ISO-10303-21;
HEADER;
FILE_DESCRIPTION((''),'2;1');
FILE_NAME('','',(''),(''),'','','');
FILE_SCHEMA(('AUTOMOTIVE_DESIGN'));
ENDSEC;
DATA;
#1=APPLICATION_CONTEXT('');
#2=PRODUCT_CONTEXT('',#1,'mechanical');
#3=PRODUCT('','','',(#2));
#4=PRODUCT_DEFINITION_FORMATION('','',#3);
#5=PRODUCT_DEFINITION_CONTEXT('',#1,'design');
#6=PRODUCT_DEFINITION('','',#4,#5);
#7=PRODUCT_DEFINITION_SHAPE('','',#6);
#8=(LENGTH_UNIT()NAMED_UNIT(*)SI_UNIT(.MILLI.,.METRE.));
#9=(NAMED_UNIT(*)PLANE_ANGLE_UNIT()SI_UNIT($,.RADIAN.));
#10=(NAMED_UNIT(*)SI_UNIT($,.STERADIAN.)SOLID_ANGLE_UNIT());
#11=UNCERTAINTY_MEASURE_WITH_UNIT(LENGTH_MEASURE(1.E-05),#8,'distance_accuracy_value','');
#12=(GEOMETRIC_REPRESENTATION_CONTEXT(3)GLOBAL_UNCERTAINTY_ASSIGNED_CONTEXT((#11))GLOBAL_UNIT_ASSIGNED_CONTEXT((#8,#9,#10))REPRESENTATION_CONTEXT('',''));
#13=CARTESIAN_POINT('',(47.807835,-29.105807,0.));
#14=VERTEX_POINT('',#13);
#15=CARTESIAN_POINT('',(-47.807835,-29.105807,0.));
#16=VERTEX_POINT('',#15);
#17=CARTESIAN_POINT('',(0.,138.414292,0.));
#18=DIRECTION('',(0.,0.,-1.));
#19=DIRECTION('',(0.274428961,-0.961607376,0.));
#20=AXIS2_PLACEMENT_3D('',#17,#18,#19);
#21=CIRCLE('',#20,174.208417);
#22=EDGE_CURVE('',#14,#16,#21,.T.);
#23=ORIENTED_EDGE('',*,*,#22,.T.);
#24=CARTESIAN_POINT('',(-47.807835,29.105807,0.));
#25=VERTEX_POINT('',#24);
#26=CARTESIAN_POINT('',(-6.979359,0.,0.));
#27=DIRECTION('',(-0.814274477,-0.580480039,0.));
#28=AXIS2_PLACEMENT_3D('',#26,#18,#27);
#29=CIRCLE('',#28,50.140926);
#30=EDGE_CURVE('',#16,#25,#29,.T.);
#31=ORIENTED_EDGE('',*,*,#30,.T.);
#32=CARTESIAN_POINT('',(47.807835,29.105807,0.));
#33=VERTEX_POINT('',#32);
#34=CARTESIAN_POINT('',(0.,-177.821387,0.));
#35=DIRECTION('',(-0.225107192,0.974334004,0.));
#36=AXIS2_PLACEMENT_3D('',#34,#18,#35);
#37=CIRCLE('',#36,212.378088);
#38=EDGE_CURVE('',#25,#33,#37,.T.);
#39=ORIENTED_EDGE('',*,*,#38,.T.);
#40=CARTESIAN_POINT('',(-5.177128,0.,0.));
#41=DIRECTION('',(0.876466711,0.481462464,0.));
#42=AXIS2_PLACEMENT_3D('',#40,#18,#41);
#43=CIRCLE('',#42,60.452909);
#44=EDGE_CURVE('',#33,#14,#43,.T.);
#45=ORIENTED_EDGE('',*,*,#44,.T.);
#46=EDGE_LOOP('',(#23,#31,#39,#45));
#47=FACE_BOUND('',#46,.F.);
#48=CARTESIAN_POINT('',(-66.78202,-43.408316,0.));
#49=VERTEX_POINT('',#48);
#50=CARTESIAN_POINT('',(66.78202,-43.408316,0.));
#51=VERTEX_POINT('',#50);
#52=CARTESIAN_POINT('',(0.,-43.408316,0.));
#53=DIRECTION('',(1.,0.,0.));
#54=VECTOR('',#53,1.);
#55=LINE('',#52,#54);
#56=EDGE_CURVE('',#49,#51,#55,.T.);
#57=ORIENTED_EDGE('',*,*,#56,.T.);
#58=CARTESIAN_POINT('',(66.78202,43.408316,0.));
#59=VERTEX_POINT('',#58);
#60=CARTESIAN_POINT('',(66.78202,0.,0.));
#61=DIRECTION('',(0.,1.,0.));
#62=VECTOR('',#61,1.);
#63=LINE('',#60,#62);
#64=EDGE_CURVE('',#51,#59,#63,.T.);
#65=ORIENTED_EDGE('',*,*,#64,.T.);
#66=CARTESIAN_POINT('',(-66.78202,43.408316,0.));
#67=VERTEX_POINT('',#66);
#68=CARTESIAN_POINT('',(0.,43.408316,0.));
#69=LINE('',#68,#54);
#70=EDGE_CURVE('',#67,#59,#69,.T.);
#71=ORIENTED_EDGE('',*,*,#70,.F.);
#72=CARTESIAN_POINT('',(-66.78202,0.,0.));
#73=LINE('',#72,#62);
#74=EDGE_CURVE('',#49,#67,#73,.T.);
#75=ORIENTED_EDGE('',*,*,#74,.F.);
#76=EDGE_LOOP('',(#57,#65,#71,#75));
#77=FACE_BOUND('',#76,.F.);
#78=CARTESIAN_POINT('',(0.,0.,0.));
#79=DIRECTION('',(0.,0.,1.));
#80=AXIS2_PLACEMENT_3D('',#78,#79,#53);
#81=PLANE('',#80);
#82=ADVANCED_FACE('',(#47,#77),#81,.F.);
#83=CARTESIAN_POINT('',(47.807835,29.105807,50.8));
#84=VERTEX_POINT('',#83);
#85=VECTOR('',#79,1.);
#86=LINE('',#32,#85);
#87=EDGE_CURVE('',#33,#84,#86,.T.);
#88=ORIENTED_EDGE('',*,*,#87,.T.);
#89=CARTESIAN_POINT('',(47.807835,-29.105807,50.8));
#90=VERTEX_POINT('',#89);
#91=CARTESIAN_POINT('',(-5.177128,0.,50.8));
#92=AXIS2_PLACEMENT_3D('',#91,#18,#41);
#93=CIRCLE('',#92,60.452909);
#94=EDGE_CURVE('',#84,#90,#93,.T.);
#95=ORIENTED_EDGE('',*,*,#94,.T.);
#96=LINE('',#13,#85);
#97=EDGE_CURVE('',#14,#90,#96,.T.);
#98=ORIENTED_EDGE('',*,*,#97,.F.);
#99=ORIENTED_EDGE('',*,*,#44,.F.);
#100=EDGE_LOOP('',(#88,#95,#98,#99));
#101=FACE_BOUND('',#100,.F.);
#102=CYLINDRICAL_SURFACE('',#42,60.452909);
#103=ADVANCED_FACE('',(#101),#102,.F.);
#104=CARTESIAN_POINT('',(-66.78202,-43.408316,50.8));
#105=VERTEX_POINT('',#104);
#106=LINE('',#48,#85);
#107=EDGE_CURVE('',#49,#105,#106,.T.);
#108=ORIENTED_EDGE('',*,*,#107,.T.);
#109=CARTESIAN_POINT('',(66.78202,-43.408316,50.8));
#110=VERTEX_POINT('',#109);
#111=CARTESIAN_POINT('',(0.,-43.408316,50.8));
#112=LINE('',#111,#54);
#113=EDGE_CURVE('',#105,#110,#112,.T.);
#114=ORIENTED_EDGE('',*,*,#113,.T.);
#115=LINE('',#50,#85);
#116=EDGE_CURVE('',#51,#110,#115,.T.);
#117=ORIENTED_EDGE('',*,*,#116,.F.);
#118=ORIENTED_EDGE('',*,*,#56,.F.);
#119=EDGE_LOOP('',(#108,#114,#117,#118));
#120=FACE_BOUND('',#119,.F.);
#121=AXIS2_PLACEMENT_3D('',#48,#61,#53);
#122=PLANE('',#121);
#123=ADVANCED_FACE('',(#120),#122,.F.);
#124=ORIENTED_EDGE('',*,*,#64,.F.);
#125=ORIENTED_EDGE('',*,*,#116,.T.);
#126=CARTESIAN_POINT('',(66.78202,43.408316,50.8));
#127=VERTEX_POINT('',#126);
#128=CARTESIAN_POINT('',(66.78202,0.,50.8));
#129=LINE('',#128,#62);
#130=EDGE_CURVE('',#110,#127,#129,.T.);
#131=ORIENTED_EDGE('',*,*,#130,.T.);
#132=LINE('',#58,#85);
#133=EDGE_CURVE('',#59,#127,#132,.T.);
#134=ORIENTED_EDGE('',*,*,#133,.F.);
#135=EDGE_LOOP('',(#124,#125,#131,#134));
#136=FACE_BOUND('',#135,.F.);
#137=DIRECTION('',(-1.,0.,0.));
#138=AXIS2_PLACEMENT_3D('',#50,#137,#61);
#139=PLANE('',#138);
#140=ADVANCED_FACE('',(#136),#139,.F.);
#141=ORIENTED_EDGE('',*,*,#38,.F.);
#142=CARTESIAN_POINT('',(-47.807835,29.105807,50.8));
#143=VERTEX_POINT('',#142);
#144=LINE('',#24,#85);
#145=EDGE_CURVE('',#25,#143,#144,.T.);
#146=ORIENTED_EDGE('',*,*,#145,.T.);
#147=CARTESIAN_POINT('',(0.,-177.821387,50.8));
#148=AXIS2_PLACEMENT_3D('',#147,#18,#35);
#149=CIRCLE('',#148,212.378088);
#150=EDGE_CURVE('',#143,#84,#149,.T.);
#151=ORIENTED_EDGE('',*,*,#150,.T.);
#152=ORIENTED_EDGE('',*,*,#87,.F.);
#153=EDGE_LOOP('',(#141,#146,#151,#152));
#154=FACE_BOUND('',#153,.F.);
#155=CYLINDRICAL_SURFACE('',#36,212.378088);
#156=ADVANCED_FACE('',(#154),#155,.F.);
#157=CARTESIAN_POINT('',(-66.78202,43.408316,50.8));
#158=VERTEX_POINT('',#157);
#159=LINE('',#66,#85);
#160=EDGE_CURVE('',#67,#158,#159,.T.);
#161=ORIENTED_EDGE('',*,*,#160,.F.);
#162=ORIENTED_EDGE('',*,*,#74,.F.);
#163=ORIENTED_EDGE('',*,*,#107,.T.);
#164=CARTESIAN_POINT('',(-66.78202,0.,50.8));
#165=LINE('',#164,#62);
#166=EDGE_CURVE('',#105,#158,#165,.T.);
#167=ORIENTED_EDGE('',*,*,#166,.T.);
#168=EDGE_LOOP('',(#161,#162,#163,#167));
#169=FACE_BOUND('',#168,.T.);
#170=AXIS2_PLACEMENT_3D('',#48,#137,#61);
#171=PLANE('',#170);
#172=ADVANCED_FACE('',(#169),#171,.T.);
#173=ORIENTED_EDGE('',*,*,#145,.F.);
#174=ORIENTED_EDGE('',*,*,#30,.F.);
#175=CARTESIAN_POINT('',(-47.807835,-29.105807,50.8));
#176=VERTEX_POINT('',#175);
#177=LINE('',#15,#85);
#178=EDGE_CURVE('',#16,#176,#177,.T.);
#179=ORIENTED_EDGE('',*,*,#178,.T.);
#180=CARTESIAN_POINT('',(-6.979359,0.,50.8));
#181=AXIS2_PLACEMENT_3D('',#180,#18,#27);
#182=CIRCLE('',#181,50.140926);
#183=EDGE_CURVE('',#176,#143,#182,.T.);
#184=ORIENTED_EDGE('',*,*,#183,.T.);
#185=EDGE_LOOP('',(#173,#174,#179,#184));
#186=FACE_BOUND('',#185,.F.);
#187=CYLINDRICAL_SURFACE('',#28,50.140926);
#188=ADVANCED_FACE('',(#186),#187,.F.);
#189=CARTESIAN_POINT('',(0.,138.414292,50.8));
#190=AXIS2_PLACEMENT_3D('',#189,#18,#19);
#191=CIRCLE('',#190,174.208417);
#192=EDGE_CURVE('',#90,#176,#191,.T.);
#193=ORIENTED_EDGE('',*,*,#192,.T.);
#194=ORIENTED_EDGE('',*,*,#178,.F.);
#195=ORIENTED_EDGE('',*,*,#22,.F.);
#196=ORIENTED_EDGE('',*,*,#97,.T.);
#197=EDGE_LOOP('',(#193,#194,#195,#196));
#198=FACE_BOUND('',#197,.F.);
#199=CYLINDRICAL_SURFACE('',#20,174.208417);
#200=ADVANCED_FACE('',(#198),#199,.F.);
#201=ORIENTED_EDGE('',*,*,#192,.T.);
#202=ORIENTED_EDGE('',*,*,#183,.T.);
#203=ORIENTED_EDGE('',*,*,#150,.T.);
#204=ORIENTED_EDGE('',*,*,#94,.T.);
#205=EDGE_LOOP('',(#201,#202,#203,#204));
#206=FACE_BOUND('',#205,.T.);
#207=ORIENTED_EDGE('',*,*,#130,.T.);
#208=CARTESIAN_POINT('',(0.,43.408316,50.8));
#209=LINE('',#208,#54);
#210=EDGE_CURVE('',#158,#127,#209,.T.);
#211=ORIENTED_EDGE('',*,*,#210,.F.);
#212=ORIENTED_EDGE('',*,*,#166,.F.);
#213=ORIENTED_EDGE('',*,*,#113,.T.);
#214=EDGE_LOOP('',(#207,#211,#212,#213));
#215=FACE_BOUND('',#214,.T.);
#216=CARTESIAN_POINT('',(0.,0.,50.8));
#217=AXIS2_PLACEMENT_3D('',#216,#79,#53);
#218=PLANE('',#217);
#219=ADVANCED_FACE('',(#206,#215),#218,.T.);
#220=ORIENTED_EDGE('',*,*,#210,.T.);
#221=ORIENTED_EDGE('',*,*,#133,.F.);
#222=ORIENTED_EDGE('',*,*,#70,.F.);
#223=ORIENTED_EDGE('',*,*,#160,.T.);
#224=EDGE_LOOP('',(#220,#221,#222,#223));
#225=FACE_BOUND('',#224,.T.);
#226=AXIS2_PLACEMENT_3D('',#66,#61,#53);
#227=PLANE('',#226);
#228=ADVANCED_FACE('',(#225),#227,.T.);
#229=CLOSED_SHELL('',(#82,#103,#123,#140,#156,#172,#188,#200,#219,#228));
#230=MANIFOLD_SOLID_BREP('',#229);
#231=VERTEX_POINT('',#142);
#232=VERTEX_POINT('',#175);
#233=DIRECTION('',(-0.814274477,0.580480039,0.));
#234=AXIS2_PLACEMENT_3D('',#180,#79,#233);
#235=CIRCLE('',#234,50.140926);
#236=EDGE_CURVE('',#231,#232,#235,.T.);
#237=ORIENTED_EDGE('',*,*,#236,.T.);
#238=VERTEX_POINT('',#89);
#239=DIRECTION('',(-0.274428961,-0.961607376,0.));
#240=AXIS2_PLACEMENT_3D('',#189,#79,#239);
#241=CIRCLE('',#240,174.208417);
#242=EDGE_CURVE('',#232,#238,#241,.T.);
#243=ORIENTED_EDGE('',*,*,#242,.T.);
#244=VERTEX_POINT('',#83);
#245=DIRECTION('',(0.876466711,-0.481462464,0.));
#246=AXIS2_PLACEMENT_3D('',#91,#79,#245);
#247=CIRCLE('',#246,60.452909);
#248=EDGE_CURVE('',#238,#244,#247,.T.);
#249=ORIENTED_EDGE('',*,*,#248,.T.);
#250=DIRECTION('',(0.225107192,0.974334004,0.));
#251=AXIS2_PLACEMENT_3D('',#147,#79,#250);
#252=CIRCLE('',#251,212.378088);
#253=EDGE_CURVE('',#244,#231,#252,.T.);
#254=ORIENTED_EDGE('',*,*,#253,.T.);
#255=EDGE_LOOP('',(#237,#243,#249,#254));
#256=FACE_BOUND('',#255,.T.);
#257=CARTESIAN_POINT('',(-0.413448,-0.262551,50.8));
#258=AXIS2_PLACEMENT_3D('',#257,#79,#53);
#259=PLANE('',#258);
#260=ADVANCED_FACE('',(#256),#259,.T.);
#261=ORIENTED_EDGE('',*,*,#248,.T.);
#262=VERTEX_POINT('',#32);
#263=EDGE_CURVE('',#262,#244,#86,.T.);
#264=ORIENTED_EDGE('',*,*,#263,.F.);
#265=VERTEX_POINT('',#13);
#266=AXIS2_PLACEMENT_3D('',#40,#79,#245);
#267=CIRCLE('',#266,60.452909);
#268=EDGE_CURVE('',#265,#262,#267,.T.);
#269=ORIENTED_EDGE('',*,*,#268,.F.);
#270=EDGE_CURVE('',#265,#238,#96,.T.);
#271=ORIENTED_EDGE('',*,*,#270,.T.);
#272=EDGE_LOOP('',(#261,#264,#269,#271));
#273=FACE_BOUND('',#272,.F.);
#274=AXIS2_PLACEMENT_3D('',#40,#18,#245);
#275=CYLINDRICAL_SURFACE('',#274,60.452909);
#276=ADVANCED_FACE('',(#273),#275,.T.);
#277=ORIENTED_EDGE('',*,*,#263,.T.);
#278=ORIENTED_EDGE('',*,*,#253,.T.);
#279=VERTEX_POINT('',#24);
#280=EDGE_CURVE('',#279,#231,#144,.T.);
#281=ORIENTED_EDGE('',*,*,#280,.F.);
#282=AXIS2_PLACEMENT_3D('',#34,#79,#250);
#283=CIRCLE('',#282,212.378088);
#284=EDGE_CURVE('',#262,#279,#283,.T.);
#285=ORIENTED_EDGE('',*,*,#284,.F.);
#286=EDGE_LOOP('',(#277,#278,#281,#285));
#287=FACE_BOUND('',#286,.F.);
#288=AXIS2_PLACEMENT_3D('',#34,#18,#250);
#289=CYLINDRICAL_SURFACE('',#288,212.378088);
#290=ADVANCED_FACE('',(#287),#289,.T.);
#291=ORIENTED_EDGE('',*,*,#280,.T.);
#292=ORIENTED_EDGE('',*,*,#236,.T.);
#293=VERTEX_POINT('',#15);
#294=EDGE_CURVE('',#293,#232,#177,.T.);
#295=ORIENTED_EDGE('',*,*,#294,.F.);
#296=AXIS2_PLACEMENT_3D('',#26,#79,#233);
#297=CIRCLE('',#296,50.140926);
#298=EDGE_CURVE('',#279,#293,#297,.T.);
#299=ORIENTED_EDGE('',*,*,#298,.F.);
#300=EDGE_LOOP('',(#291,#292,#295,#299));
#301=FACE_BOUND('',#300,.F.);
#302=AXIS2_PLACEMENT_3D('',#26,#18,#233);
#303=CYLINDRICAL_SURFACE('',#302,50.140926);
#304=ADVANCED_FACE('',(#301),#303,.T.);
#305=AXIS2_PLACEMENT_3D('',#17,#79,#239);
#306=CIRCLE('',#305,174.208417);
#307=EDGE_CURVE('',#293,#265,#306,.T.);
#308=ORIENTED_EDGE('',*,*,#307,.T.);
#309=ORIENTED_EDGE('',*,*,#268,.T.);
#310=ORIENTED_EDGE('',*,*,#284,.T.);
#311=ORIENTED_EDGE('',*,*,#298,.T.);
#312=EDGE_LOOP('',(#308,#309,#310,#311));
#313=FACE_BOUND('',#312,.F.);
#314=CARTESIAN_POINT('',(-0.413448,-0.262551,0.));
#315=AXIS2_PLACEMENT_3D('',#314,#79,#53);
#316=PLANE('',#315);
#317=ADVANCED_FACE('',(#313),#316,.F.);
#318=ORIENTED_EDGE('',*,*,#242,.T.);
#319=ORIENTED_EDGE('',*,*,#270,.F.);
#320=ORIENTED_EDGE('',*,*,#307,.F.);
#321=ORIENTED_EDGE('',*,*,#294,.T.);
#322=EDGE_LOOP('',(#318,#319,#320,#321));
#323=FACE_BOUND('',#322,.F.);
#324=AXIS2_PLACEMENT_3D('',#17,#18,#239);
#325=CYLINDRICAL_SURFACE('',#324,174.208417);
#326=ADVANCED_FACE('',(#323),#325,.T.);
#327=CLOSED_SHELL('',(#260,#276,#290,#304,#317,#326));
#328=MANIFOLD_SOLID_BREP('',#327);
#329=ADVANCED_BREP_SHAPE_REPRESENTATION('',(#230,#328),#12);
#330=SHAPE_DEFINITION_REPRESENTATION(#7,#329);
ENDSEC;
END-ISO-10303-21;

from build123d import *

# Parameters (mm, degrees)
F0_W     = 133.5640400648
F0_H     = 86.8166312575
F2_DEPTH = 50.8


# Not quite as in the source:
# - a feature of the source that left no trace in its solid (it failed there, or was rolled back) is left out


with BuildPart() as f2:
    # F0 (on Top) → F2 (new body)
    with BuildSketch(Plane.XY):
        Rectangle(F0_W, F0_H)
        with BuildLine():
            ThreePointArc((-47.8078350425, 29.1058067232), (0, 34.5567017881), (47.8078350425, 29.1058067232))
            ThreePointArc((47.8078350425, 29.1058067232), (55.2757817597, 0), (47.8078350425, -29.1058067232))
            ThreePointArc((47.8078350425, -29.1058067232), (0, -35.794125029), (-47.8078350425, -29.1058067232))
            ThreePointArc((-47.8078350425, -29.1058067232), (-57.1202847567, 0), (-47.8078350425, 29.1058067232))
        make_face(mode=Mode.SUBTRACT)
    extrude(amount=F2_DEPTH)


with BuildPart() as f2b:
    # F1 (on face) → F2, piece 2 (new body)
    with BuildSketch(Plane.XY):
        with BuildLine():
            ThreePointArc((47.8078350425, 29.1058067232), (0, 34.5567017881), (-47.8078350425, 29.1058067232))
            ThreePointArc((-47.8078350425, 29.1058067232), (-57.1202847567, 0), (-47.8078350425, -29.1058067232))
            ThreePointArc((-47.8078350425, -29.1058067232), (0, -35.794125029), (47.8078350425, -29.1058067232))
            ThreePointArc((47.8078350425, -29.1058067232), (55.2757817597, 0), (47.8078350425, 29.1058067232))
        make_face()
    extrude(amount=F2_DEPTH)


solid = Compound([f2.part, f2b.part])
